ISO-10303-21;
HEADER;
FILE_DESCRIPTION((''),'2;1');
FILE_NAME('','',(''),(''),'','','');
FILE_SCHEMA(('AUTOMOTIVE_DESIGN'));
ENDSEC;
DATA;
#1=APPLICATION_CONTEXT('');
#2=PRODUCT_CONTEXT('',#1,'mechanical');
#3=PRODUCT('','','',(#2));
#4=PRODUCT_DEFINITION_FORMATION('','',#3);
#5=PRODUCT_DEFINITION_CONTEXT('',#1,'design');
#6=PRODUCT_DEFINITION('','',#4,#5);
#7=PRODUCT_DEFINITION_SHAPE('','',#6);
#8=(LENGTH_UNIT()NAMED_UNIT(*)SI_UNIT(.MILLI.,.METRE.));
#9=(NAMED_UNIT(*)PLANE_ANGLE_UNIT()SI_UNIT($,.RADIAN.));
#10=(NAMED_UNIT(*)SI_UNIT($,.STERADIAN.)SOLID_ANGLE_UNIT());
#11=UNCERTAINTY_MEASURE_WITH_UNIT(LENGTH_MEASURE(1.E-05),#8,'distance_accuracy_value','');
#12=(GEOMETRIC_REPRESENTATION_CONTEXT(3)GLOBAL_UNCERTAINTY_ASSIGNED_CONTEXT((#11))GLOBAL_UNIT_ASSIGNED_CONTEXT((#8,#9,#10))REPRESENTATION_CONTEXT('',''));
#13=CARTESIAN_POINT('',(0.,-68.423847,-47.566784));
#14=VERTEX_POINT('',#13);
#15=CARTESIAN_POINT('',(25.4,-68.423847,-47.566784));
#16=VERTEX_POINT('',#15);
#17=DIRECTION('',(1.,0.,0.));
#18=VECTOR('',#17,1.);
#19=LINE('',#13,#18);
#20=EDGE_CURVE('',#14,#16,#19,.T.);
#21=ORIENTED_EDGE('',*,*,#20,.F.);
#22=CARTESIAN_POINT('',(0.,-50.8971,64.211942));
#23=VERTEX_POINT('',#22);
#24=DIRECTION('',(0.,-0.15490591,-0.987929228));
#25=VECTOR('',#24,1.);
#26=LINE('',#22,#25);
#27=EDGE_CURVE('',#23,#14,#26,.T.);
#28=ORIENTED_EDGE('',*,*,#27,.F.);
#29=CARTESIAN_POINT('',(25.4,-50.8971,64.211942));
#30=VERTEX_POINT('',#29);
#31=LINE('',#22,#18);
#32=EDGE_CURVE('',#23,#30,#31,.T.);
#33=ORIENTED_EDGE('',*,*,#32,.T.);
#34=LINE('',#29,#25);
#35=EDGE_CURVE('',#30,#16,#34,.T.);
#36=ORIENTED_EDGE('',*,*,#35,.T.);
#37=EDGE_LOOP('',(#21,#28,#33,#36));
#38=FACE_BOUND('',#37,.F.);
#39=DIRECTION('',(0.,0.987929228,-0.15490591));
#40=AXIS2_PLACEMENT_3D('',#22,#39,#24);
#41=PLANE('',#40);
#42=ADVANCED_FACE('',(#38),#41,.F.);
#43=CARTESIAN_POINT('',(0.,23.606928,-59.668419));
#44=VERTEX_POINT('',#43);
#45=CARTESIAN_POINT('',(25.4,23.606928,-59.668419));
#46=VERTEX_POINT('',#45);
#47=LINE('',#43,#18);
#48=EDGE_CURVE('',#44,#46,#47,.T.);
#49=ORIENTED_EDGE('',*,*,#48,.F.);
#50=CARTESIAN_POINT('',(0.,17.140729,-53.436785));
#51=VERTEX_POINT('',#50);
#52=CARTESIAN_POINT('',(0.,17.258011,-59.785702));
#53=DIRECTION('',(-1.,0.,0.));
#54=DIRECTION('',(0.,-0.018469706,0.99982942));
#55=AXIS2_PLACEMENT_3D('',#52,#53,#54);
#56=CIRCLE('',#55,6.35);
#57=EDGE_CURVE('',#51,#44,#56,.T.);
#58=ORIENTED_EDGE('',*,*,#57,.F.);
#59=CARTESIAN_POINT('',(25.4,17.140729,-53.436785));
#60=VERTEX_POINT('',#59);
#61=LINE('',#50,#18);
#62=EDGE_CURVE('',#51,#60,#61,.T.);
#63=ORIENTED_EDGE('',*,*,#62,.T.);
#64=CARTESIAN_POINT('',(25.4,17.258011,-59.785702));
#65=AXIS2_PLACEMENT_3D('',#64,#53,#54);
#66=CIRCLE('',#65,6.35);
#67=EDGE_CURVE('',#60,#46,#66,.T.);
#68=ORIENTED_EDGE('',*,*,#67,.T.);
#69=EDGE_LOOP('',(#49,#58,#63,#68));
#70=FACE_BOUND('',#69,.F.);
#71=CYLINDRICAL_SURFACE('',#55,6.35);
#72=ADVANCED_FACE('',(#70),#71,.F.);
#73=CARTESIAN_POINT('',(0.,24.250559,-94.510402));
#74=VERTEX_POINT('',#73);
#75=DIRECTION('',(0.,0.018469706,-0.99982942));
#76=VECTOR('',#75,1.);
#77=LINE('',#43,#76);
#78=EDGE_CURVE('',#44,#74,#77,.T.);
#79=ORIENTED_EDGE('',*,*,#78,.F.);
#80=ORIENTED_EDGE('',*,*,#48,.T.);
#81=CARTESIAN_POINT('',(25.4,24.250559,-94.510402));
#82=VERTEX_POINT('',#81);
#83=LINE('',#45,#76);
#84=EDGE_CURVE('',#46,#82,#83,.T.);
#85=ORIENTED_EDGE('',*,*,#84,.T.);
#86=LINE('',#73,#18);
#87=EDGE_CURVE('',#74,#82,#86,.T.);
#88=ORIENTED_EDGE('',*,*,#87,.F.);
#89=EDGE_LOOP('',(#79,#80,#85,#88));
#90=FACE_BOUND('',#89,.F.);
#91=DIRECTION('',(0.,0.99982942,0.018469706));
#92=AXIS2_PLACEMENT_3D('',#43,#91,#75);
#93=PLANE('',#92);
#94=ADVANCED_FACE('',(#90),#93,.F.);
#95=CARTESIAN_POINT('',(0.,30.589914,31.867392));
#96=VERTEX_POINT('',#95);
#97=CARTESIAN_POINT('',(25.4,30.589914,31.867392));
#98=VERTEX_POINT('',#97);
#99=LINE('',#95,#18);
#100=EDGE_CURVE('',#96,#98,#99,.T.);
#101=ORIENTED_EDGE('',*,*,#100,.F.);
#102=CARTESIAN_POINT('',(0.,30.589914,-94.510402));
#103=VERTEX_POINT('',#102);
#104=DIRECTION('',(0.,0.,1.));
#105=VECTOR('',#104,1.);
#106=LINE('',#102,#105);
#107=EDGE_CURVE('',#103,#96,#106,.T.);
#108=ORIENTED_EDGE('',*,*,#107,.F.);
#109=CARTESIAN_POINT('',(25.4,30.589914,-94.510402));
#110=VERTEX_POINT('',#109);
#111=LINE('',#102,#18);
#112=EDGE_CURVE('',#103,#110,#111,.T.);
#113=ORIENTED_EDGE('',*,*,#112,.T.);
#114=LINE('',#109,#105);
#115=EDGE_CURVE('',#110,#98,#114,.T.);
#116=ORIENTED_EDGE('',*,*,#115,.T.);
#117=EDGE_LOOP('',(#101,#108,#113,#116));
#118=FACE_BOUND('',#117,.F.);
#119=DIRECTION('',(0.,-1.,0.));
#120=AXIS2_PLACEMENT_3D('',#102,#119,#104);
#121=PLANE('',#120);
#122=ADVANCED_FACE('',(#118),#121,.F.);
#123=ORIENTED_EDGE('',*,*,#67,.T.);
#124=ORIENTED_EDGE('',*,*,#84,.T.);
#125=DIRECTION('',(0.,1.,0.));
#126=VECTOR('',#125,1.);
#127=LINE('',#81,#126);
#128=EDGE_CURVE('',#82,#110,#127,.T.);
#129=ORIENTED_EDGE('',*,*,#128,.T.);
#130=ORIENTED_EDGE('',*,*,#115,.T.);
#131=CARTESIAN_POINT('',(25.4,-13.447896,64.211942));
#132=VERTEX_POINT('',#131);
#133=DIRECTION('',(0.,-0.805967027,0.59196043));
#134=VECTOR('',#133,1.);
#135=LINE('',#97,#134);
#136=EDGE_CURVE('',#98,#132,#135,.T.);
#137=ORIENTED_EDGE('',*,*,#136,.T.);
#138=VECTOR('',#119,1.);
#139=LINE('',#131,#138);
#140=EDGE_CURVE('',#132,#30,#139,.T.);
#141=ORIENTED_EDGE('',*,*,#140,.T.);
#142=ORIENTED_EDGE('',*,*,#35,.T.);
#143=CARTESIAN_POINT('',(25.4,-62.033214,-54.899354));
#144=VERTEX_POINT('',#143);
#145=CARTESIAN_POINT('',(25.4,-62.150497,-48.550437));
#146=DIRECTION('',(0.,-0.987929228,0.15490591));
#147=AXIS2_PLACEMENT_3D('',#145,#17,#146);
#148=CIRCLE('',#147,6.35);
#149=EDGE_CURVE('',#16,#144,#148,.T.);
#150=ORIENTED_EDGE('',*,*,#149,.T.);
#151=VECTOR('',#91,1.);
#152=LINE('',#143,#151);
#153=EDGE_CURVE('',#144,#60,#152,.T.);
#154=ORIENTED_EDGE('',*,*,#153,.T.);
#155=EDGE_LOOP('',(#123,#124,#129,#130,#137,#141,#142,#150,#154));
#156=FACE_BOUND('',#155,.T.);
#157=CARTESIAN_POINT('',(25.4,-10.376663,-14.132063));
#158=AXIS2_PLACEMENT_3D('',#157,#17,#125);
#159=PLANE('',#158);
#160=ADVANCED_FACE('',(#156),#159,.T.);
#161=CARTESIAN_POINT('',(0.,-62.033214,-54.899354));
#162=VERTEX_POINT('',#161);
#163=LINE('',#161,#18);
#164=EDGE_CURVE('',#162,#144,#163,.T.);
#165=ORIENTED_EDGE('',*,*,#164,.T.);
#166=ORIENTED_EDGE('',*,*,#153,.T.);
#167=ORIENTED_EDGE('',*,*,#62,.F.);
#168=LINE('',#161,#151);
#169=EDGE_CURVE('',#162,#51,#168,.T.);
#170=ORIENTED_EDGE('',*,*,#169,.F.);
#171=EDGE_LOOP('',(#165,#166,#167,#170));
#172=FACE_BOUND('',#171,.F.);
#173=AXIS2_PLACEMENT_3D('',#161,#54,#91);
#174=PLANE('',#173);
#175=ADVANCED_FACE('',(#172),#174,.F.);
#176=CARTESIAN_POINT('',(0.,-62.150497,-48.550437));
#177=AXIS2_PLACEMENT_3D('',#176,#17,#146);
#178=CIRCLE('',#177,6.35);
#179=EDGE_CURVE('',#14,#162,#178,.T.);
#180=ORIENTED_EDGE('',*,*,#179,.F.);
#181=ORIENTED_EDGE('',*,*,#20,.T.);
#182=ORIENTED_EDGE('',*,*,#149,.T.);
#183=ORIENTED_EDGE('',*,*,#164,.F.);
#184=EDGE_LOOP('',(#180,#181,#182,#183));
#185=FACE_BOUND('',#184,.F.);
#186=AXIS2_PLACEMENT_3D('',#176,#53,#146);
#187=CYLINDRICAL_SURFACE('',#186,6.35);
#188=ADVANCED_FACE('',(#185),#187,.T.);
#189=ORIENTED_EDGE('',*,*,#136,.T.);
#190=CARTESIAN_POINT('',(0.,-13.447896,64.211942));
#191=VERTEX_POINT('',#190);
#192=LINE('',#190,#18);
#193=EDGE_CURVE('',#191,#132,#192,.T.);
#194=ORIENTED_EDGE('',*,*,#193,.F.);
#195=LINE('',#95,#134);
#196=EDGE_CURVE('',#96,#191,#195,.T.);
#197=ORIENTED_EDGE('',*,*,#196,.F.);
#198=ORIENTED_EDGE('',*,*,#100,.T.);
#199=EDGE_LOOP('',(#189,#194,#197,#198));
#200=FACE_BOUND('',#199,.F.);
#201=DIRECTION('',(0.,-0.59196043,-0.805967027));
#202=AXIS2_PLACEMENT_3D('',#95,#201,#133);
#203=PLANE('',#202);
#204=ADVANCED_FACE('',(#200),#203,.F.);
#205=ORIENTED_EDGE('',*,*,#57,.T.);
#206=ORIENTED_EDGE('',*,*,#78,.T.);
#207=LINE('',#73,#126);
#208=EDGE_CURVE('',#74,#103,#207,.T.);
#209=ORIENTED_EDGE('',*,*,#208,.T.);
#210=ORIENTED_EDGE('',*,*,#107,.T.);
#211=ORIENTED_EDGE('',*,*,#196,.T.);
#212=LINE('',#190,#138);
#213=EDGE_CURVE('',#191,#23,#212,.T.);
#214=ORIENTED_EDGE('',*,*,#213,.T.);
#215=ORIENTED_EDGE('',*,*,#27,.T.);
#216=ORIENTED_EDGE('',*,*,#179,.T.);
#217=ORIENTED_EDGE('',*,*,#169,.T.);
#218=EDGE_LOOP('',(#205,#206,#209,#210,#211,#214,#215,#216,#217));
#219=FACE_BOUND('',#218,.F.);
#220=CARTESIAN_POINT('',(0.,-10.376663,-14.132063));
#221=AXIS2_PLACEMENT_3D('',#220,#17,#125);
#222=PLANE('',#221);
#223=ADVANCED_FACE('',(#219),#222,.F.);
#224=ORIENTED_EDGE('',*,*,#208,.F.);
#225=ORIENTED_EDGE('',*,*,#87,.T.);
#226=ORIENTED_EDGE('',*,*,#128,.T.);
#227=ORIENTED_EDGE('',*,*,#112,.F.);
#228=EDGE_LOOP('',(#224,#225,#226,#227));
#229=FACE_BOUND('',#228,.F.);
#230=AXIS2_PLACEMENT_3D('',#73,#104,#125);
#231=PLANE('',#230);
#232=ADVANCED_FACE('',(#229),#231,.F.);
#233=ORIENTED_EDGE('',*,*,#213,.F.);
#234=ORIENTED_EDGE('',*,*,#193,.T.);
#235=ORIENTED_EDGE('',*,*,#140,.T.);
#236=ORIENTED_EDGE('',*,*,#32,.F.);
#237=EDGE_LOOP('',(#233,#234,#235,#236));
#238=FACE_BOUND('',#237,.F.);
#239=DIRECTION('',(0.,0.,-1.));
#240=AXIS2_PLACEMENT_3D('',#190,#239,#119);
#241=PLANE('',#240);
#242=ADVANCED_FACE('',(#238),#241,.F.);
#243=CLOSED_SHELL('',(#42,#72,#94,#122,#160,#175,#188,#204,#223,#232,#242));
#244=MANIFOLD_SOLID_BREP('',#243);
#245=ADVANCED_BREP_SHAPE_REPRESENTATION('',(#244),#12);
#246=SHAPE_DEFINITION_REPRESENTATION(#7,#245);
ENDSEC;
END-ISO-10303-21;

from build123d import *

# Parameters (mm, degrees)
F1_DEPTH = 25.4


# Not quite as in the source:
# - the program builds the solid bodies; features that only make, move or delete a surface that nothing else refers to are left out


with BuildPart() as f1:
    # F0 (on Right) → F1 (new body)
    with BuildSketch(Plane.YZ):
        with BuildLine():
            Line((30.5899139494, 31.8673923612), (-13.4478956461, 64.2119422555))
            Line((-13.4478956461, 64.2119422555), (-50.8971004581, 64.2119422555))
            Line((-50.8971004581, 64.2119422555), (-68.4238471531, -47.566784402))
            ThreePointArc((-68.4238471531, -47.566784402), (-66.9375558311, -52.7225543163), (-62.0332139244, -54.8993537478))
            Line((-62.0332139244, -54.8993537478), (17.1407288117, -53.4367848312))
            ThreePointArc((17.1407288117, -53.4367848312), (21.6644422357, -55.21340817), (23.6069282635, -59.6684190188))
            Line((23.6069282635, -59.6684190188), (24.2505592335, -94.5104021757))
            Line((24.2505592335, -94.5104021757), (30.5899139494, -94.5104021757))
            Line((30.5899139494, -94.5104021757), (30.5899139494, 31.8673923612))
        make_face()
    extrude(amount=F1_DEPTH)


solid = f1.part
